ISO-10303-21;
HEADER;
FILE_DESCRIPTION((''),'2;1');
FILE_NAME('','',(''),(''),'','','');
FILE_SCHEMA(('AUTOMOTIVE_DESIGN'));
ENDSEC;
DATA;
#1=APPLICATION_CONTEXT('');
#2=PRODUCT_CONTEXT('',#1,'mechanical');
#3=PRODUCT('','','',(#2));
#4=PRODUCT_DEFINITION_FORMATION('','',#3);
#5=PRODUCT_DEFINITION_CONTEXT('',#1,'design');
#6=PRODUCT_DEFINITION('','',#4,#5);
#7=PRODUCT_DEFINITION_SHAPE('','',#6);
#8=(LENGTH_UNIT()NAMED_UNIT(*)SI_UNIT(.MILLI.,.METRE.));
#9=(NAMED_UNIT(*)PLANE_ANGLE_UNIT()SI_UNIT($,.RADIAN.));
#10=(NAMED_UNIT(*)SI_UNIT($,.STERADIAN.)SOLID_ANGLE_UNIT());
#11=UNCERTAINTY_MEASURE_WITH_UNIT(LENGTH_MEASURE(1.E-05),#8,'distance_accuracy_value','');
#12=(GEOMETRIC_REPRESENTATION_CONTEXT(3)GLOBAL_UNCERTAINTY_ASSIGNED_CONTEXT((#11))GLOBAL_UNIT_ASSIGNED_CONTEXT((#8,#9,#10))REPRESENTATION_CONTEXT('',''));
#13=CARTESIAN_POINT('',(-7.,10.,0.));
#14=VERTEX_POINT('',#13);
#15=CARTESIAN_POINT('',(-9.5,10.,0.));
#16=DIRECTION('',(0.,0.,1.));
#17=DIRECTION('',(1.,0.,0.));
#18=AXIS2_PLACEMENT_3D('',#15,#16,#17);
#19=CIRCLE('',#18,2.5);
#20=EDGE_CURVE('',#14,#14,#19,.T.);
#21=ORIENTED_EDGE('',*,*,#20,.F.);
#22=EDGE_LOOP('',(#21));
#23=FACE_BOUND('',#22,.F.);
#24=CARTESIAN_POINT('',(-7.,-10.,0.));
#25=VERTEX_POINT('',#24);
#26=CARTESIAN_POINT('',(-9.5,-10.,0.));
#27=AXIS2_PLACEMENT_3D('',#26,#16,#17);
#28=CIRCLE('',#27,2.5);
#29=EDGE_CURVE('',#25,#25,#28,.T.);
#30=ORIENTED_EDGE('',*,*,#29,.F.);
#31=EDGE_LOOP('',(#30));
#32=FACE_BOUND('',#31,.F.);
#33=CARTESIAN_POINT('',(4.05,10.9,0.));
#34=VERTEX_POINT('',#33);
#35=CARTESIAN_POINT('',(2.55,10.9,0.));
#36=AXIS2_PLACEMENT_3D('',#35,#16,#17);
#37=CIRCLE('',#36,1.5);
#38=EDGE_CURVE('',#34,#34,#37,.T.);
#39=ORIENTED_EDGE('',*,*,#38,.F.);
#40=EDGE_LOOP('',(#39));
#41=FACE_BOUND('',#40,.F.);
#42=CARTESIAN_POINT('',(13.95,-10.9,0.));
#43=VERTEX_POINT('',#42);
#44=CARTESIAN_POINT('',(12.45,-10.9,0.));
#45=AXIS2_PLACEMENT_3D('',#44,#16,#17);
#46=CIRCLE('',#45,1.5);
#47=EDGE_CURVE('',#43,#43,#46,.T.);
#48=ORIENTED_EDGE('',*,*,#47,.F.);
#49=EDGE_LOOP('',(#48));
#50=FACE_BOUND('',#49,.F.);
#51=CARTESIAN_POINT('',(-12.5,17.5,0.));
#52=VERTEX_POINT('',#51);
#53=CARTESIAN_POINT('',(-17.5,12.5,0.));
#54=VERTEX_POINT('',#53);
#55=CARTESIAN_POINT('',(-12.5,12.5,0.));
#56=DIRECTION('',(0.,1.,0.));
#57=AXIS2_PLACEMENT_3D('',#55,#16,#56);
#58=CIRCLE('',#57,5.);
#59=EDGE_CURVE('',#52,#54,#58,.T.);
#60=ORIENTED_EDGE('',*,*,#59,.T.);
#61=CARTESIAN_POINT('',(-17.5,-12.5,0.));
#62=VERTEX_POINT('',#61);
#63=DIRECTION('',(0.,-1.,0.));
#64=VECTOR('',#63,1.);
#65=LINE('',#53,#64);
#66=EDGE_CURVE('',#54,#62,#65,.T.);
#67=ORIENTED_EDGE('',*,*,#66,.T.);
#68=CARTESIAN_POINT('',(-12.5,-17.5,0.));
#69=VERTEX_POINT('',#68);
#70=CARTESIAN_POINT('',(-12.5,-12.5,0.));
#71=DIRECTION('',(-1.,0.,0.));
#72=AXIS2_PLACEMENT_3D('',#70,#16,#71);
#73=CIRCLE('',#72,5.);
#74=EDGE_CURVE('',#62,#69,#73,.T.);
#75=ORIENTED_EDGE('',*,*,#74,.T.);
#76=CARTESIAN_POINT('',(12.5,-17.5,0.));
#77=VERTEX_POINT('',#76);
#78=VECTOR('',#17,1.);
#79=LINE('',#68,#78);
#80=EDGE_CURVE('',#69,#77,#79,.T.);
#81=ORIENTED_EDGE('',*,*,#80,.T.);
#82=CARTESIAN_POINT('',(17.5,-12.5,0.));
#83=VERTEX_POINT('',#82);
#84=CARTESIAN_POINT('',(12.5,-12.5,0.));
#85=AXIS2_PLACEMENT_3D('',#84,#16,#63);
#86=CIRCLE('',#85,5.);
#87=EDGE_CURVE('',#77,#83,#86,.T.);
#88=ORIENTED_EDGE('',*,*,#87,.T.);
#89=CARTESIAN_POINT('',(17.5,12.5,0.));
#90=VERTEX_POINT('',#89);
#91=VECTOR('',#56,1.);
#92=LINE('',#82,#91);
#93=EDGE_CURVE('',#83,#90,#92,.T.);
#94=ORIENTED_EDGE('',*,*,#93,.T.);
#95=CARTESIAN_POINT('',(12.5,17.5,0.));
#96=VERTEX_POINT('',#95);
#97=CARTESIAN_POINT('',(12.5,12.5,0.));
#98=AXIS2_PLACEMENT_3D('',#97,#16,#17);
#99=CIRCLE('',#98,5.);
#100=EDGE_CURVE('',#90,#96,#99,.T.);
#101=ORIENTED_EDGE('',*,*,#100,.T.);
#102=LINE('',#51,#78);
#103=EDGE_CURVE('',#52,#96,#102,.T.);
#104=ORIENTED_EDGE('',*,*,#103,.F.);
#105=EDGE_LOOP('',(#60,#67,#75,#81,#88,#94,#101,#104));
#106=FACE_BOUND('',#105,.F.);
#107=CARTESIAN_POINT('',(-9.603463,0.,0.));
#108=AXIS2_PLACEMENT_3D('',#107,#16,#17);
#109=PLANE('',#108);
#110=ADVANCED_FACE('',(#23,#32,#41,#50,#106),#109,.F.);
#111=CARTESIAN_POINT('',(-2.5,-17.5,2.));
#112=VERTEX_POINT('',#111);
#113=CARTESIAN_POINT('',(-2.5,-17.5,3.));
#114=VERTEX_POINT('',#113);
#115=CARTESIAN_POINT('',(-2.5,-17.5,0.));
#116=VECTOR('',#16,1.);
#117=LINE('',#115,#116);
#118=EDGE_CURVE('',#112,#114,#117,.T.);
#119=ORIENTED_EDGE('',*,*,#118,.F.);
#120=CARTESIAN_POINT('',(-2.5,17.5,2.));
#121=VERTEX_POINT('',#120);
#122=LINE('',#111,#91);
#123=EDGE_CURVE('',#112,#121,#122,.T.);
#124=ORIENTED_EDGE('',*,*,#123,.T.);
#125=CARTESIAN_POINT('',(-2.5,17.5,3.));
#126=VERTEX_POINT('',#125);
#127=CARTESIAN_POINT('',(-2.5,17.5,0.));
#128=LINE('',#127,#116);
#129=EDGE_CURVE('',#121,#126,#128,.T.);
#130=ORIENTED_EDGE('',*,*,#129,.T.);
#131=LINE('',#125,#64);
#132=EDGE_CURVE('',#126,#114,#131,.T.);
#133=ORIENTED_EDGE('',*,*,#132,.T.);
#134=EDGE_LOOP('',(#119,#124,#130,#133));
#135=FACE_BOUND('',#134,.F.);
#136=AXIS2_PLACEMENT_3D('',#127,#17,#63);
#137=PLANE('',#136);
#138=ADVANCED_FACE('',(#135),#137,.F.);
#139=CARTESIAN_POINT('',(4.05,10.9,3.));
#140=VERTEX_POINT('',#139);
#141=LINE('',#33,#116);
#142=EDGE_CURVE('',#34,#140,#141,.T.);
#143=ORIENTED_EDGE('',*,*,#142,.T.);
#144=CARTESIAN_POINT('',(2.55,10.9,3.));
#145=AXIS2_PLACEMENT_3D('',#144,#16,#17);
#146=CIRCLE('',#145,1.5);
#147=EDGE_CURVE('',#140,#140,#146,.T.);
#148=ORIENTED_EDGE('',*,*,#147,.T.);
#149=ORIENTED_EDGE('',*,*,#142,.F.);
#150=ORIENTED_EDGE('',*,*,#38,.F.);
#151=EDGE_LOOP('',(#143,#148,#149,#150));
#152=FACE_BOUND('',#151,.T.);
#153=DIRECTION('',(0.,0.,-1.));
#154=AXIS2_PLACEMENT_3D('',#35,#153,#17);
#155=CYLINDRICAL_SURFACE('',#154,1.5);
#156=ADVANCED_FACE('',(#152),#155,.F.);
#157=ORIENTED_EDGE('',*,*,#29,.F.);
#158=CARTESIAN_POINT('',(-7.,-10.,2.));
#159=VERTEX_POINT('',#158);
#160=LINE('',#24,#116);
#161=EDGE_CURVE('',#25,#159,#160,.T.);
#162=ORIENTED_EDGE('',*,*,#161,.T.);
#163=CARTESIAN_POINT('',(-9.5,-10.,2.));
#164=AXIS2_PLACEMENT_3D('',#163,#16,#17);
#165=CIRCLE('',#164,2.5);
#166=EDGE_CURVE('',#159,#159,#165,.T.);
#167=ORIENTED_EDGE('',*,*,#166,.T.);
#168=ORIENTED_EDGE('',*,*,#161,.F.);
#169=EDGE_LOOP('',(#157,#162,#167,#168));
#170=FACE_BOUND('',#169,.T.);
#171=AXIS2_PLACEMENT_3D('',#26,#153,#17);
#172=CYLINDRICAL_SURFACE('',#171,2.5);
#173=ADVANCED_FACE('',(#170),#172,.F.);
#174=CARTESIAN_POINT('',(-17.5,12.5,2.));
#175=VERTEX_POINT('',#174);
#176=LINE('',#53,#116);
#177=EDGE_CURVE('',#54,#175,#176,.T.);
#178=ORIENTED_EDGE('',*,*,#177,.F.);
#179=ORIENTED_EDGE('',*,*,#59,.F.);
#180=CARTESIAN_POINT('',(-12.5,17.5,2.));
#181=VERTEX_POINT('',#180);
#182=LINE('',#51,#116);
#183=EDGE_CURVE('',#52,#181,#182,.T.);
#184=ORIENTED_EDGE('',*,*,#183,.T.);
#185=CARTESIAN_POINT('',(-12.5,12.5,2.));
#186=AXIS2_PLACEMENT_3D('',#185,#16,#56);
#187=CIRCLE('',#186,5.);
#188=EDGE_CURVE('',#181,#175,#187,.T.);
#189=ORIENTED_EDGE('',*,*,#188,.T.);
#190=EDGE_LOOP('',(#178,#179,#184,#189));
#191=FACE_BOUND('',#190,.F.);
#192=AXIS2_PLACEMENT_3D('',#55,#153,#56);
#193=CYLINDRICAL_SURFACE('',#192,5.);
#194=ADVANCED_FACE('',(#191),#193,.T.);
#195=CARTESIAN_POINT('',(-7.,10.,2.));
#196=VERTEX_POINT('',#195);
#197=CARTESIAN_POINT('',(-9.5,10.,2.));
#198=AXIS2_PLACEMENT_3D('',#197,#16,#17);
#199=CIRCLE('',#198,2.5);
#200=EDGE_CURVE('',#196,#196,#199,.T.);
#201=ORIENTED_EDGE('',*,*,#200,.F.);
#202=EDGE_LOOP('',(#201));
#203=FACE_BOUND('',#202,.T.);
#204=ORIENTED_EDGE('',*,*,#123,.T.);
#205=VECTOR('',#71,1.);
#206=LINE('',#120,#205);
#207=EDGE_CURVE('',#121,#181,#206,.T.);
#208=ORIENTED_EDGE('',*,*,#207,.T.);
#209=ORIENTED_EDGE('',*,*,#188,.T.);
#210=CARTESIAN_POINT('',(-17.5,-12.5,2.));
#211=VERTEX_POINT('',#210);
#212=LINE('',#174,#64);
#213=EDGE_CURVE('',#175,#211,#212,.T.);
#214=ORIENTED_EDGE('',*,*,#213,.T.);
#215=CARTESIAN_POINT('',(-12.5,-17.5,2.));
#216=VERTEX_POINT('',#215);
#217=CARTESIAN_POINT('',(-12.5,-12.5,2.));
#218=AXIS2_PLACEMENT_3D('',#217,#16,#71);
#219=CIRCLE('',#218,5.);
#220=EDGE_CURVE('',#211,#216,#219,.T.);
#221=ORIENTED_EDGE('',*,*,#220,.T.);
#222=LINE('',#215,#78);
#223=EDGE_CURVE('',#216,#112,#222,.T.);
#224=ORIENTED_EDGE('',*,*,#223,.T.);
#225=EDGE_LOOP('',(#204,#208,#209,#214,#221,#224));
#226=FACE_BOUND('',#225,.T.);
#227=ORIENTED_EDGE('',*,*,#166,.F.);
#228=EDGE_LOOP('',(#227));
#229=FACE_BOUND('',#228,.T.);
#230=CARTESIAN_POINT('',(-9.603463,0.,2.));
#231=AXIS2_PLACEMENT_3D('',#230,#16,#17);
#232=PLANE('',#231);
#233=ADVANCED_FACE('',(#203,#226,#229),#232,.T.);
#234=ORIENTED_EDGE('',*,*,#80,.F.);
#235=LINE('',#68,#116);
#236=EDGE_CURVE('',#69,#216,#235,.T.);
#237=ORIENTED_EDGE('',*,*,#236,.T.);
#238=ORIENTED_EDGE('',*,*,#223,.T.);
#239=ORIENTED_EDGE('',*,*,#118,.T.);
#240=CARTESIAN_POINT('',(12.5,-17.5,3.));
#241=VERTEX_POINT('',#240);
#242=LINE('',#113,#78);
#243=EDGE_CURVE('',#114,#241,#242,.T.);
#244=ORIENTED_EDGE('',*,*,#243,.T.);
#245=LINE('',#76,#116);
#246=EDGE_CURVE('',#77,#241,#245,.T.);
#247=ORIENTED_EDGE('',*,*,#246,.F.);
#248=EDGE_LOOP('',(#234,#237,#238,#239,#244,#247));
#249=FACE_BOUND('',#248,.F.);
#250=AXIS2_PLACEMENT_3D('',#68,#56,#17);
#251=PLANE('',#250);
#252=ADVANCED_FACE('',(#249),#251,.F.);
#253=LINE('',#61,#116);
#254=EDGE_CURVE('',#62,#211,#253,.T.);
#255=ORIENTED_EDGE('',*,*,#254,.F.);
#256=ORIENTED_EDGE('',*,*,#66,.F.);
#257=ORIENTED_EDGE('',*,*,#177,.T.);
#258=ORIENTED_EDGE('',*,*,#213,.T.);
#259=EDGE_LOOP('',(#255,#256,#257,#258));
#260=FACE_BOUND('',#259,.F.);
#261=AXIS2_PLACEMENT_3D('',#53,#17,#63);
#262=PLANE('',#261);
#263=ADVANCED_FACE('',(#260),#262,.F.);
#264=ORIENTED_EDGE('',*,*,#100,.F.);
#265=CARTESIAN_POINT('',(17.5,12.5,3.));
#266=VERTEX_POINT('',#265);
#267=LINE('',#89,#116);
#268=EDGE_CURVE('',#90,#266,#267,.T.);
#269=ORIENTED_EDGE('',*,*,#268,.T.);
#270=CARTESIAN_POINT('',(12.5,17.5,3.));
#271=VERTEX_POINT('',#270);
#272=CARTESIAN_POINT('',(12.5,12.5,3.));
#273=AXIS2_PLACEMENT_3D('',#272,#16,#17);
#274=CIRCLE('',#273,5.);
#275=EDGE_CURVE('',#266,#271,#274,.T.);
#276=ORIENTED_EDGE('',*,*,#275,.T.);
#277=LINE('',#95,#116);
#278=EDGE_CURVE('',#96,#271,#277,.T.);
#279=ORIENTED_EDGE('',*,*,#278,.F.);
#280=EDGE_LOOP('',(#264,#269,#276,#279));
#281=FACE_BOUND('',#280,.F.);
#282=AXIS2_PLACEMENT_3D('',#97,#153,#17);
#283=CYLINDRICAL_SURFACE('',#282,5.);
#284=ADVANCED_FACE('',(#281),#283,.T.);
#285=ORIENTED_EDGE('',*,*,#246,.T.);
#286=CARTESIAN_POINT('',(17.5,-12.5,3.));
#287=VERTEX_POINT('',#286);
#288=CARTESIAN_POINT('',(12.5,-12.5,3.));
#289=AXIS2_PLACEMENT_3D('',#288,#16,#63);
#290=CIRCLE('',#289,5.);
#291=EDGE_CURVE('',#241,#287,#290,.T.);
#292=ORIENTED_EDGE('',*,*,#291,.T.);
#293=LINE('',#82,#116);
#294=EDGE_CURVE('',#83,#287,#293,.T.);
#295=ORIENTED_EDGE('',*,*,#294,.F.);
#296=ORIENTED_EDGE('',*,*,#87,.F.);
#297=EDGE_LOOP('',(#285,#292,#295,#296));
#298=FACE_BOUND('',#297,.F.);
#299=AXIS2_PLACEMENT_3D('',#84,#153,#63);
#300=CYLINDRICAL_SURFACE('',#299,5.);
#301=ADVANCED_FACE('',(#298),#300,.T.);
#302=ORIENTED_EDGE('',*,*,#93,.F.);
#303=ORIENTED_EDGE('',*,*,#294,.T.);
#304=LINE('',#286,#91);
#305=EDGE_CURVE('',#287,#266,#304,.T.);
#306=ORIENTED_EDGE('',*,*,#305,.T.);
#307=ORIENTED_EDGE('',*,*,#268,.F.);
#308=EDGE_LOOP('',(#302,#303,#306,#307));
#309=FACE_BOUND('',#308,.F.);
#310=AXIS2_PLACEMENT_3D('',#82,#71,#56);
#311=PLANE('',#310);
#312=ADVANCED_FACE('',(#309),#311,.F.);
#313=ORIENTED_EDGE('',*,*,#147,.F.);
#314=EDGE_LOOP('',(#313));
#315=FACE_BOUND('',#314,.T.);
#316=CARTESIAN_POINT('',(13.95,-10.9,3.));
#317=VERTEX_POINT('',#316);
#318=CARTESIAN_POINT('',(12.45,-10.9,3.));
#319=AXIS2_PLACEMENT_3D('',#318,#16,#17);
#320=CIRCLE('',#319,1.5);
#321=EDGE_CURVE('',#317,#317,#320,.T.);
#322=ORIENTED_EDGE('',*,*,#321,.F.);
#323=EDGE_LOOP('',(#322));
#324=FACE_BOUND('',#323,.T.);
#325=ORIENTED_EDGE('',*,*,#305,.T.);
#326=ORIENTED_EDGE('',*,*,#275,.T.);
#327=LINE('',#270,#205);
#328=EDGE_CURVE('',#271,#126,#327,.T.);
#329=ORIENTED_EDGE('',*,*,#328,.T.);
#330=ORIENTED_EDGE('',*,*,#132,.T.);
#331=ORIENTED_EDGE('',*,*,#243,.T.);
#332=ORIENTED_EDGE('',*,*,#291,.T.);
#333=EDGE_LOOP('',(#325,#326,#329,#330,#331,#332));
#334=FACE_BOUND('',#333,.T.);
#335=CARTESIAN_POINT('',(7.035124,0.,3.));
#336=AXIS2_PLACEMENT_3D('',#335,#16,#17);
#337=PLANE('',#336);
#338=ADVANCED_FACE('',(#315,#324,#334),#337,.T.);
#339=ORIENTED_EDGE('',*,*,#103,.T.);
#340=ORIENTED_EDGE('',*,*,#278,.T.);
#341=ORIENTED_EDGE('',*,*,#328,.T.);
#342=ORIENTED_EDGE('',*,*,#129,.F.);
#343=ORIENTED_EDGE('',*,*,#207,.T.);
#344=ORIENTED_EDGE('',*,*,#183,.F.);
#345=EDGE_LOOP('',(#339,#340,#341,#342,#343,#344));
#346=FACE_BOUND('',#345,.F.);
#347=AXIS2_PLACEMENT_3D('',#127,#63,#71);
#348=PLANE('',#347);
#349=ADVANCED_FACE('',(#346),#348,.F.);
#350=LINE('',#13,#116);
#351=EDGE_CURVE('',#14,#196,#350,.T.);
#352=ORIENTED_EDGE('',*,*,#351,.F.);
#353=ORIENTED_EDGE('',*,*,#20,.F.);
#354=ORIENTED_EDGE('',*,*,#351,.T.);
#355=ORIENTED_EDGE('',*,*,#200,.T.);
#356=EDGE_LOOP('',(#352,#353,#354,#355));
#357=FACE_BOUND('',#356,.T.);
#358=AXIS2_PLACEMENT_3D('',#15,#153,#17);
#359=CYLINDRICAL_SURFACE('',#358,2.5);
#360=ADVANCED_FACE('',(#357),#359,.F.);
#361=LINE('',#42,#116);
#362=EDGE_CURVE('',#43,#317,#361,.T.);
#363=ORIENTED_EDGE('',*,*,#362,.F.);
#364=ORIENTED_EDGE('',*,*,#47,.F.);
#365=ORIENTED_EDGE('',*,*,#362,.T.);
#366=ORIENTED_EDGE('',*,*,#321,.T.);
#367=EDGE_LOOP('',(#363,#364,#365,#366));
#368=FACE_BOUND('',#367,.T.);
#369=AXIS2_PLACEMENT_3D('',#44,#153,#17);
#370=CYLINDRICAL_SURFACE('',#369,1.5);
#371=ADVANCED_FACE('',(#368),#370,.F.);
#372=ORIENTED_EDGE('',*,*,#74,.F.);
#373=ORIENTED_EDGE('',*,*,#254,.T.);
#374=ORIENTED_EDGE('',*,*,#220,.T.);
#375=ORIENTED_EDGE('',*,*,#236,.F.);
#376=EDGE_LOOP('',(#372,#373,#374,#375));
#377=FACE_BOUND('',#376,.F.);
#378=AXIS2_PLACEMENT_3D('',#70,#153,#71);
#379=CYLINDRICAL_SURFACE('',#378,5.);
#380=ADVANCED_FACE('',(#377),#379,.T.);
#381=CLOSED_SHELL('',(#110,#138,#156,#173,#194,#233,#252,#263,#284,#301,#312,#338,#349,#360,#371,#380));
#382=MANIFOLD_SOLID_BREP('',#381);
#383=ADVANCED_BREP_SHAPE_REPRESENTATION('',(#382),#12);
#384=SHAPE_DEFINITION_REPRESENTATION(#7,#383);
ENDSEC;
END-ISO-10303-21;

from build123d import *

# Parameters (mm, degrees)
F0_R     = 1.5
F1_DEPTH = 3
F0_R_2   = 2.5
F2_DEPTH = 2


# Not quite as in the source:
# - a feature of the source that left no trace in its solid (it failed there, or was rolled back) is left out


with BuildPart() as f1:
    # F0 (on Top) → F1 (new body)
    with BuildSketch(Plane.XY):
        with BuildLine():
            Line((-2.5, -17.5), (12.5, -17.5))
            ThreePointArc((12.5, -17.5), (16.0355339059, -16.0355339059), (17.5, -12.5))
            Line((17.5, -12.5), (17.5, 12.5))
            ThreePointArc((17.5, 12.5), (16.0355339059, 16.0355339059), (12.5, 17.5))
            Line((12.5, 17.5), (-2.5, 17.5))
            Line((-2.5, 17.5), (-2.5, -17.5))
        make_face()
        with Locations((12.45, -10.9)):
            Circle(F0_R, mode=Mode.SUBTRACT)
        with Locations((2.55, 10.9)):
            Circle(F0_R, mode=Mode.SUBTRACT)
    extrude(amount=F1_DEPTH)

    # F0 (on Top) → F2 (join)
    with BuildSketch(Plane.XY):
        with BuildLine():
            Line((-12.5, -17.5), (-2.5, -17.5))
            Line((-2.5, -17.5), (-2.5, 17.5))
            Line((-2.5, 17.5), (-12.5, 17.5))
            ThreePointArc((-12.5, 17.5), (-16.0355339059, 16.0355339059), (-17.5, 12.5))
            Line((-17.5, 12.5), (-17.5, -12.5))
            ThreePointArc((-17.5, -12.5), (-16.0355339059, -16.0355339059), (-12.5, -17.5))
        make_face()
        with Locations((-9.5, -10)):
            Circle(F0_R_2, mode=Mode.SUBTRACT)
        with Locations((-9.5, 10)):
            Circle(F0_R_2, mode=Mode.SUBTRACT)
    extrude(amount=F2_DEPTH)


solid = f1.part
